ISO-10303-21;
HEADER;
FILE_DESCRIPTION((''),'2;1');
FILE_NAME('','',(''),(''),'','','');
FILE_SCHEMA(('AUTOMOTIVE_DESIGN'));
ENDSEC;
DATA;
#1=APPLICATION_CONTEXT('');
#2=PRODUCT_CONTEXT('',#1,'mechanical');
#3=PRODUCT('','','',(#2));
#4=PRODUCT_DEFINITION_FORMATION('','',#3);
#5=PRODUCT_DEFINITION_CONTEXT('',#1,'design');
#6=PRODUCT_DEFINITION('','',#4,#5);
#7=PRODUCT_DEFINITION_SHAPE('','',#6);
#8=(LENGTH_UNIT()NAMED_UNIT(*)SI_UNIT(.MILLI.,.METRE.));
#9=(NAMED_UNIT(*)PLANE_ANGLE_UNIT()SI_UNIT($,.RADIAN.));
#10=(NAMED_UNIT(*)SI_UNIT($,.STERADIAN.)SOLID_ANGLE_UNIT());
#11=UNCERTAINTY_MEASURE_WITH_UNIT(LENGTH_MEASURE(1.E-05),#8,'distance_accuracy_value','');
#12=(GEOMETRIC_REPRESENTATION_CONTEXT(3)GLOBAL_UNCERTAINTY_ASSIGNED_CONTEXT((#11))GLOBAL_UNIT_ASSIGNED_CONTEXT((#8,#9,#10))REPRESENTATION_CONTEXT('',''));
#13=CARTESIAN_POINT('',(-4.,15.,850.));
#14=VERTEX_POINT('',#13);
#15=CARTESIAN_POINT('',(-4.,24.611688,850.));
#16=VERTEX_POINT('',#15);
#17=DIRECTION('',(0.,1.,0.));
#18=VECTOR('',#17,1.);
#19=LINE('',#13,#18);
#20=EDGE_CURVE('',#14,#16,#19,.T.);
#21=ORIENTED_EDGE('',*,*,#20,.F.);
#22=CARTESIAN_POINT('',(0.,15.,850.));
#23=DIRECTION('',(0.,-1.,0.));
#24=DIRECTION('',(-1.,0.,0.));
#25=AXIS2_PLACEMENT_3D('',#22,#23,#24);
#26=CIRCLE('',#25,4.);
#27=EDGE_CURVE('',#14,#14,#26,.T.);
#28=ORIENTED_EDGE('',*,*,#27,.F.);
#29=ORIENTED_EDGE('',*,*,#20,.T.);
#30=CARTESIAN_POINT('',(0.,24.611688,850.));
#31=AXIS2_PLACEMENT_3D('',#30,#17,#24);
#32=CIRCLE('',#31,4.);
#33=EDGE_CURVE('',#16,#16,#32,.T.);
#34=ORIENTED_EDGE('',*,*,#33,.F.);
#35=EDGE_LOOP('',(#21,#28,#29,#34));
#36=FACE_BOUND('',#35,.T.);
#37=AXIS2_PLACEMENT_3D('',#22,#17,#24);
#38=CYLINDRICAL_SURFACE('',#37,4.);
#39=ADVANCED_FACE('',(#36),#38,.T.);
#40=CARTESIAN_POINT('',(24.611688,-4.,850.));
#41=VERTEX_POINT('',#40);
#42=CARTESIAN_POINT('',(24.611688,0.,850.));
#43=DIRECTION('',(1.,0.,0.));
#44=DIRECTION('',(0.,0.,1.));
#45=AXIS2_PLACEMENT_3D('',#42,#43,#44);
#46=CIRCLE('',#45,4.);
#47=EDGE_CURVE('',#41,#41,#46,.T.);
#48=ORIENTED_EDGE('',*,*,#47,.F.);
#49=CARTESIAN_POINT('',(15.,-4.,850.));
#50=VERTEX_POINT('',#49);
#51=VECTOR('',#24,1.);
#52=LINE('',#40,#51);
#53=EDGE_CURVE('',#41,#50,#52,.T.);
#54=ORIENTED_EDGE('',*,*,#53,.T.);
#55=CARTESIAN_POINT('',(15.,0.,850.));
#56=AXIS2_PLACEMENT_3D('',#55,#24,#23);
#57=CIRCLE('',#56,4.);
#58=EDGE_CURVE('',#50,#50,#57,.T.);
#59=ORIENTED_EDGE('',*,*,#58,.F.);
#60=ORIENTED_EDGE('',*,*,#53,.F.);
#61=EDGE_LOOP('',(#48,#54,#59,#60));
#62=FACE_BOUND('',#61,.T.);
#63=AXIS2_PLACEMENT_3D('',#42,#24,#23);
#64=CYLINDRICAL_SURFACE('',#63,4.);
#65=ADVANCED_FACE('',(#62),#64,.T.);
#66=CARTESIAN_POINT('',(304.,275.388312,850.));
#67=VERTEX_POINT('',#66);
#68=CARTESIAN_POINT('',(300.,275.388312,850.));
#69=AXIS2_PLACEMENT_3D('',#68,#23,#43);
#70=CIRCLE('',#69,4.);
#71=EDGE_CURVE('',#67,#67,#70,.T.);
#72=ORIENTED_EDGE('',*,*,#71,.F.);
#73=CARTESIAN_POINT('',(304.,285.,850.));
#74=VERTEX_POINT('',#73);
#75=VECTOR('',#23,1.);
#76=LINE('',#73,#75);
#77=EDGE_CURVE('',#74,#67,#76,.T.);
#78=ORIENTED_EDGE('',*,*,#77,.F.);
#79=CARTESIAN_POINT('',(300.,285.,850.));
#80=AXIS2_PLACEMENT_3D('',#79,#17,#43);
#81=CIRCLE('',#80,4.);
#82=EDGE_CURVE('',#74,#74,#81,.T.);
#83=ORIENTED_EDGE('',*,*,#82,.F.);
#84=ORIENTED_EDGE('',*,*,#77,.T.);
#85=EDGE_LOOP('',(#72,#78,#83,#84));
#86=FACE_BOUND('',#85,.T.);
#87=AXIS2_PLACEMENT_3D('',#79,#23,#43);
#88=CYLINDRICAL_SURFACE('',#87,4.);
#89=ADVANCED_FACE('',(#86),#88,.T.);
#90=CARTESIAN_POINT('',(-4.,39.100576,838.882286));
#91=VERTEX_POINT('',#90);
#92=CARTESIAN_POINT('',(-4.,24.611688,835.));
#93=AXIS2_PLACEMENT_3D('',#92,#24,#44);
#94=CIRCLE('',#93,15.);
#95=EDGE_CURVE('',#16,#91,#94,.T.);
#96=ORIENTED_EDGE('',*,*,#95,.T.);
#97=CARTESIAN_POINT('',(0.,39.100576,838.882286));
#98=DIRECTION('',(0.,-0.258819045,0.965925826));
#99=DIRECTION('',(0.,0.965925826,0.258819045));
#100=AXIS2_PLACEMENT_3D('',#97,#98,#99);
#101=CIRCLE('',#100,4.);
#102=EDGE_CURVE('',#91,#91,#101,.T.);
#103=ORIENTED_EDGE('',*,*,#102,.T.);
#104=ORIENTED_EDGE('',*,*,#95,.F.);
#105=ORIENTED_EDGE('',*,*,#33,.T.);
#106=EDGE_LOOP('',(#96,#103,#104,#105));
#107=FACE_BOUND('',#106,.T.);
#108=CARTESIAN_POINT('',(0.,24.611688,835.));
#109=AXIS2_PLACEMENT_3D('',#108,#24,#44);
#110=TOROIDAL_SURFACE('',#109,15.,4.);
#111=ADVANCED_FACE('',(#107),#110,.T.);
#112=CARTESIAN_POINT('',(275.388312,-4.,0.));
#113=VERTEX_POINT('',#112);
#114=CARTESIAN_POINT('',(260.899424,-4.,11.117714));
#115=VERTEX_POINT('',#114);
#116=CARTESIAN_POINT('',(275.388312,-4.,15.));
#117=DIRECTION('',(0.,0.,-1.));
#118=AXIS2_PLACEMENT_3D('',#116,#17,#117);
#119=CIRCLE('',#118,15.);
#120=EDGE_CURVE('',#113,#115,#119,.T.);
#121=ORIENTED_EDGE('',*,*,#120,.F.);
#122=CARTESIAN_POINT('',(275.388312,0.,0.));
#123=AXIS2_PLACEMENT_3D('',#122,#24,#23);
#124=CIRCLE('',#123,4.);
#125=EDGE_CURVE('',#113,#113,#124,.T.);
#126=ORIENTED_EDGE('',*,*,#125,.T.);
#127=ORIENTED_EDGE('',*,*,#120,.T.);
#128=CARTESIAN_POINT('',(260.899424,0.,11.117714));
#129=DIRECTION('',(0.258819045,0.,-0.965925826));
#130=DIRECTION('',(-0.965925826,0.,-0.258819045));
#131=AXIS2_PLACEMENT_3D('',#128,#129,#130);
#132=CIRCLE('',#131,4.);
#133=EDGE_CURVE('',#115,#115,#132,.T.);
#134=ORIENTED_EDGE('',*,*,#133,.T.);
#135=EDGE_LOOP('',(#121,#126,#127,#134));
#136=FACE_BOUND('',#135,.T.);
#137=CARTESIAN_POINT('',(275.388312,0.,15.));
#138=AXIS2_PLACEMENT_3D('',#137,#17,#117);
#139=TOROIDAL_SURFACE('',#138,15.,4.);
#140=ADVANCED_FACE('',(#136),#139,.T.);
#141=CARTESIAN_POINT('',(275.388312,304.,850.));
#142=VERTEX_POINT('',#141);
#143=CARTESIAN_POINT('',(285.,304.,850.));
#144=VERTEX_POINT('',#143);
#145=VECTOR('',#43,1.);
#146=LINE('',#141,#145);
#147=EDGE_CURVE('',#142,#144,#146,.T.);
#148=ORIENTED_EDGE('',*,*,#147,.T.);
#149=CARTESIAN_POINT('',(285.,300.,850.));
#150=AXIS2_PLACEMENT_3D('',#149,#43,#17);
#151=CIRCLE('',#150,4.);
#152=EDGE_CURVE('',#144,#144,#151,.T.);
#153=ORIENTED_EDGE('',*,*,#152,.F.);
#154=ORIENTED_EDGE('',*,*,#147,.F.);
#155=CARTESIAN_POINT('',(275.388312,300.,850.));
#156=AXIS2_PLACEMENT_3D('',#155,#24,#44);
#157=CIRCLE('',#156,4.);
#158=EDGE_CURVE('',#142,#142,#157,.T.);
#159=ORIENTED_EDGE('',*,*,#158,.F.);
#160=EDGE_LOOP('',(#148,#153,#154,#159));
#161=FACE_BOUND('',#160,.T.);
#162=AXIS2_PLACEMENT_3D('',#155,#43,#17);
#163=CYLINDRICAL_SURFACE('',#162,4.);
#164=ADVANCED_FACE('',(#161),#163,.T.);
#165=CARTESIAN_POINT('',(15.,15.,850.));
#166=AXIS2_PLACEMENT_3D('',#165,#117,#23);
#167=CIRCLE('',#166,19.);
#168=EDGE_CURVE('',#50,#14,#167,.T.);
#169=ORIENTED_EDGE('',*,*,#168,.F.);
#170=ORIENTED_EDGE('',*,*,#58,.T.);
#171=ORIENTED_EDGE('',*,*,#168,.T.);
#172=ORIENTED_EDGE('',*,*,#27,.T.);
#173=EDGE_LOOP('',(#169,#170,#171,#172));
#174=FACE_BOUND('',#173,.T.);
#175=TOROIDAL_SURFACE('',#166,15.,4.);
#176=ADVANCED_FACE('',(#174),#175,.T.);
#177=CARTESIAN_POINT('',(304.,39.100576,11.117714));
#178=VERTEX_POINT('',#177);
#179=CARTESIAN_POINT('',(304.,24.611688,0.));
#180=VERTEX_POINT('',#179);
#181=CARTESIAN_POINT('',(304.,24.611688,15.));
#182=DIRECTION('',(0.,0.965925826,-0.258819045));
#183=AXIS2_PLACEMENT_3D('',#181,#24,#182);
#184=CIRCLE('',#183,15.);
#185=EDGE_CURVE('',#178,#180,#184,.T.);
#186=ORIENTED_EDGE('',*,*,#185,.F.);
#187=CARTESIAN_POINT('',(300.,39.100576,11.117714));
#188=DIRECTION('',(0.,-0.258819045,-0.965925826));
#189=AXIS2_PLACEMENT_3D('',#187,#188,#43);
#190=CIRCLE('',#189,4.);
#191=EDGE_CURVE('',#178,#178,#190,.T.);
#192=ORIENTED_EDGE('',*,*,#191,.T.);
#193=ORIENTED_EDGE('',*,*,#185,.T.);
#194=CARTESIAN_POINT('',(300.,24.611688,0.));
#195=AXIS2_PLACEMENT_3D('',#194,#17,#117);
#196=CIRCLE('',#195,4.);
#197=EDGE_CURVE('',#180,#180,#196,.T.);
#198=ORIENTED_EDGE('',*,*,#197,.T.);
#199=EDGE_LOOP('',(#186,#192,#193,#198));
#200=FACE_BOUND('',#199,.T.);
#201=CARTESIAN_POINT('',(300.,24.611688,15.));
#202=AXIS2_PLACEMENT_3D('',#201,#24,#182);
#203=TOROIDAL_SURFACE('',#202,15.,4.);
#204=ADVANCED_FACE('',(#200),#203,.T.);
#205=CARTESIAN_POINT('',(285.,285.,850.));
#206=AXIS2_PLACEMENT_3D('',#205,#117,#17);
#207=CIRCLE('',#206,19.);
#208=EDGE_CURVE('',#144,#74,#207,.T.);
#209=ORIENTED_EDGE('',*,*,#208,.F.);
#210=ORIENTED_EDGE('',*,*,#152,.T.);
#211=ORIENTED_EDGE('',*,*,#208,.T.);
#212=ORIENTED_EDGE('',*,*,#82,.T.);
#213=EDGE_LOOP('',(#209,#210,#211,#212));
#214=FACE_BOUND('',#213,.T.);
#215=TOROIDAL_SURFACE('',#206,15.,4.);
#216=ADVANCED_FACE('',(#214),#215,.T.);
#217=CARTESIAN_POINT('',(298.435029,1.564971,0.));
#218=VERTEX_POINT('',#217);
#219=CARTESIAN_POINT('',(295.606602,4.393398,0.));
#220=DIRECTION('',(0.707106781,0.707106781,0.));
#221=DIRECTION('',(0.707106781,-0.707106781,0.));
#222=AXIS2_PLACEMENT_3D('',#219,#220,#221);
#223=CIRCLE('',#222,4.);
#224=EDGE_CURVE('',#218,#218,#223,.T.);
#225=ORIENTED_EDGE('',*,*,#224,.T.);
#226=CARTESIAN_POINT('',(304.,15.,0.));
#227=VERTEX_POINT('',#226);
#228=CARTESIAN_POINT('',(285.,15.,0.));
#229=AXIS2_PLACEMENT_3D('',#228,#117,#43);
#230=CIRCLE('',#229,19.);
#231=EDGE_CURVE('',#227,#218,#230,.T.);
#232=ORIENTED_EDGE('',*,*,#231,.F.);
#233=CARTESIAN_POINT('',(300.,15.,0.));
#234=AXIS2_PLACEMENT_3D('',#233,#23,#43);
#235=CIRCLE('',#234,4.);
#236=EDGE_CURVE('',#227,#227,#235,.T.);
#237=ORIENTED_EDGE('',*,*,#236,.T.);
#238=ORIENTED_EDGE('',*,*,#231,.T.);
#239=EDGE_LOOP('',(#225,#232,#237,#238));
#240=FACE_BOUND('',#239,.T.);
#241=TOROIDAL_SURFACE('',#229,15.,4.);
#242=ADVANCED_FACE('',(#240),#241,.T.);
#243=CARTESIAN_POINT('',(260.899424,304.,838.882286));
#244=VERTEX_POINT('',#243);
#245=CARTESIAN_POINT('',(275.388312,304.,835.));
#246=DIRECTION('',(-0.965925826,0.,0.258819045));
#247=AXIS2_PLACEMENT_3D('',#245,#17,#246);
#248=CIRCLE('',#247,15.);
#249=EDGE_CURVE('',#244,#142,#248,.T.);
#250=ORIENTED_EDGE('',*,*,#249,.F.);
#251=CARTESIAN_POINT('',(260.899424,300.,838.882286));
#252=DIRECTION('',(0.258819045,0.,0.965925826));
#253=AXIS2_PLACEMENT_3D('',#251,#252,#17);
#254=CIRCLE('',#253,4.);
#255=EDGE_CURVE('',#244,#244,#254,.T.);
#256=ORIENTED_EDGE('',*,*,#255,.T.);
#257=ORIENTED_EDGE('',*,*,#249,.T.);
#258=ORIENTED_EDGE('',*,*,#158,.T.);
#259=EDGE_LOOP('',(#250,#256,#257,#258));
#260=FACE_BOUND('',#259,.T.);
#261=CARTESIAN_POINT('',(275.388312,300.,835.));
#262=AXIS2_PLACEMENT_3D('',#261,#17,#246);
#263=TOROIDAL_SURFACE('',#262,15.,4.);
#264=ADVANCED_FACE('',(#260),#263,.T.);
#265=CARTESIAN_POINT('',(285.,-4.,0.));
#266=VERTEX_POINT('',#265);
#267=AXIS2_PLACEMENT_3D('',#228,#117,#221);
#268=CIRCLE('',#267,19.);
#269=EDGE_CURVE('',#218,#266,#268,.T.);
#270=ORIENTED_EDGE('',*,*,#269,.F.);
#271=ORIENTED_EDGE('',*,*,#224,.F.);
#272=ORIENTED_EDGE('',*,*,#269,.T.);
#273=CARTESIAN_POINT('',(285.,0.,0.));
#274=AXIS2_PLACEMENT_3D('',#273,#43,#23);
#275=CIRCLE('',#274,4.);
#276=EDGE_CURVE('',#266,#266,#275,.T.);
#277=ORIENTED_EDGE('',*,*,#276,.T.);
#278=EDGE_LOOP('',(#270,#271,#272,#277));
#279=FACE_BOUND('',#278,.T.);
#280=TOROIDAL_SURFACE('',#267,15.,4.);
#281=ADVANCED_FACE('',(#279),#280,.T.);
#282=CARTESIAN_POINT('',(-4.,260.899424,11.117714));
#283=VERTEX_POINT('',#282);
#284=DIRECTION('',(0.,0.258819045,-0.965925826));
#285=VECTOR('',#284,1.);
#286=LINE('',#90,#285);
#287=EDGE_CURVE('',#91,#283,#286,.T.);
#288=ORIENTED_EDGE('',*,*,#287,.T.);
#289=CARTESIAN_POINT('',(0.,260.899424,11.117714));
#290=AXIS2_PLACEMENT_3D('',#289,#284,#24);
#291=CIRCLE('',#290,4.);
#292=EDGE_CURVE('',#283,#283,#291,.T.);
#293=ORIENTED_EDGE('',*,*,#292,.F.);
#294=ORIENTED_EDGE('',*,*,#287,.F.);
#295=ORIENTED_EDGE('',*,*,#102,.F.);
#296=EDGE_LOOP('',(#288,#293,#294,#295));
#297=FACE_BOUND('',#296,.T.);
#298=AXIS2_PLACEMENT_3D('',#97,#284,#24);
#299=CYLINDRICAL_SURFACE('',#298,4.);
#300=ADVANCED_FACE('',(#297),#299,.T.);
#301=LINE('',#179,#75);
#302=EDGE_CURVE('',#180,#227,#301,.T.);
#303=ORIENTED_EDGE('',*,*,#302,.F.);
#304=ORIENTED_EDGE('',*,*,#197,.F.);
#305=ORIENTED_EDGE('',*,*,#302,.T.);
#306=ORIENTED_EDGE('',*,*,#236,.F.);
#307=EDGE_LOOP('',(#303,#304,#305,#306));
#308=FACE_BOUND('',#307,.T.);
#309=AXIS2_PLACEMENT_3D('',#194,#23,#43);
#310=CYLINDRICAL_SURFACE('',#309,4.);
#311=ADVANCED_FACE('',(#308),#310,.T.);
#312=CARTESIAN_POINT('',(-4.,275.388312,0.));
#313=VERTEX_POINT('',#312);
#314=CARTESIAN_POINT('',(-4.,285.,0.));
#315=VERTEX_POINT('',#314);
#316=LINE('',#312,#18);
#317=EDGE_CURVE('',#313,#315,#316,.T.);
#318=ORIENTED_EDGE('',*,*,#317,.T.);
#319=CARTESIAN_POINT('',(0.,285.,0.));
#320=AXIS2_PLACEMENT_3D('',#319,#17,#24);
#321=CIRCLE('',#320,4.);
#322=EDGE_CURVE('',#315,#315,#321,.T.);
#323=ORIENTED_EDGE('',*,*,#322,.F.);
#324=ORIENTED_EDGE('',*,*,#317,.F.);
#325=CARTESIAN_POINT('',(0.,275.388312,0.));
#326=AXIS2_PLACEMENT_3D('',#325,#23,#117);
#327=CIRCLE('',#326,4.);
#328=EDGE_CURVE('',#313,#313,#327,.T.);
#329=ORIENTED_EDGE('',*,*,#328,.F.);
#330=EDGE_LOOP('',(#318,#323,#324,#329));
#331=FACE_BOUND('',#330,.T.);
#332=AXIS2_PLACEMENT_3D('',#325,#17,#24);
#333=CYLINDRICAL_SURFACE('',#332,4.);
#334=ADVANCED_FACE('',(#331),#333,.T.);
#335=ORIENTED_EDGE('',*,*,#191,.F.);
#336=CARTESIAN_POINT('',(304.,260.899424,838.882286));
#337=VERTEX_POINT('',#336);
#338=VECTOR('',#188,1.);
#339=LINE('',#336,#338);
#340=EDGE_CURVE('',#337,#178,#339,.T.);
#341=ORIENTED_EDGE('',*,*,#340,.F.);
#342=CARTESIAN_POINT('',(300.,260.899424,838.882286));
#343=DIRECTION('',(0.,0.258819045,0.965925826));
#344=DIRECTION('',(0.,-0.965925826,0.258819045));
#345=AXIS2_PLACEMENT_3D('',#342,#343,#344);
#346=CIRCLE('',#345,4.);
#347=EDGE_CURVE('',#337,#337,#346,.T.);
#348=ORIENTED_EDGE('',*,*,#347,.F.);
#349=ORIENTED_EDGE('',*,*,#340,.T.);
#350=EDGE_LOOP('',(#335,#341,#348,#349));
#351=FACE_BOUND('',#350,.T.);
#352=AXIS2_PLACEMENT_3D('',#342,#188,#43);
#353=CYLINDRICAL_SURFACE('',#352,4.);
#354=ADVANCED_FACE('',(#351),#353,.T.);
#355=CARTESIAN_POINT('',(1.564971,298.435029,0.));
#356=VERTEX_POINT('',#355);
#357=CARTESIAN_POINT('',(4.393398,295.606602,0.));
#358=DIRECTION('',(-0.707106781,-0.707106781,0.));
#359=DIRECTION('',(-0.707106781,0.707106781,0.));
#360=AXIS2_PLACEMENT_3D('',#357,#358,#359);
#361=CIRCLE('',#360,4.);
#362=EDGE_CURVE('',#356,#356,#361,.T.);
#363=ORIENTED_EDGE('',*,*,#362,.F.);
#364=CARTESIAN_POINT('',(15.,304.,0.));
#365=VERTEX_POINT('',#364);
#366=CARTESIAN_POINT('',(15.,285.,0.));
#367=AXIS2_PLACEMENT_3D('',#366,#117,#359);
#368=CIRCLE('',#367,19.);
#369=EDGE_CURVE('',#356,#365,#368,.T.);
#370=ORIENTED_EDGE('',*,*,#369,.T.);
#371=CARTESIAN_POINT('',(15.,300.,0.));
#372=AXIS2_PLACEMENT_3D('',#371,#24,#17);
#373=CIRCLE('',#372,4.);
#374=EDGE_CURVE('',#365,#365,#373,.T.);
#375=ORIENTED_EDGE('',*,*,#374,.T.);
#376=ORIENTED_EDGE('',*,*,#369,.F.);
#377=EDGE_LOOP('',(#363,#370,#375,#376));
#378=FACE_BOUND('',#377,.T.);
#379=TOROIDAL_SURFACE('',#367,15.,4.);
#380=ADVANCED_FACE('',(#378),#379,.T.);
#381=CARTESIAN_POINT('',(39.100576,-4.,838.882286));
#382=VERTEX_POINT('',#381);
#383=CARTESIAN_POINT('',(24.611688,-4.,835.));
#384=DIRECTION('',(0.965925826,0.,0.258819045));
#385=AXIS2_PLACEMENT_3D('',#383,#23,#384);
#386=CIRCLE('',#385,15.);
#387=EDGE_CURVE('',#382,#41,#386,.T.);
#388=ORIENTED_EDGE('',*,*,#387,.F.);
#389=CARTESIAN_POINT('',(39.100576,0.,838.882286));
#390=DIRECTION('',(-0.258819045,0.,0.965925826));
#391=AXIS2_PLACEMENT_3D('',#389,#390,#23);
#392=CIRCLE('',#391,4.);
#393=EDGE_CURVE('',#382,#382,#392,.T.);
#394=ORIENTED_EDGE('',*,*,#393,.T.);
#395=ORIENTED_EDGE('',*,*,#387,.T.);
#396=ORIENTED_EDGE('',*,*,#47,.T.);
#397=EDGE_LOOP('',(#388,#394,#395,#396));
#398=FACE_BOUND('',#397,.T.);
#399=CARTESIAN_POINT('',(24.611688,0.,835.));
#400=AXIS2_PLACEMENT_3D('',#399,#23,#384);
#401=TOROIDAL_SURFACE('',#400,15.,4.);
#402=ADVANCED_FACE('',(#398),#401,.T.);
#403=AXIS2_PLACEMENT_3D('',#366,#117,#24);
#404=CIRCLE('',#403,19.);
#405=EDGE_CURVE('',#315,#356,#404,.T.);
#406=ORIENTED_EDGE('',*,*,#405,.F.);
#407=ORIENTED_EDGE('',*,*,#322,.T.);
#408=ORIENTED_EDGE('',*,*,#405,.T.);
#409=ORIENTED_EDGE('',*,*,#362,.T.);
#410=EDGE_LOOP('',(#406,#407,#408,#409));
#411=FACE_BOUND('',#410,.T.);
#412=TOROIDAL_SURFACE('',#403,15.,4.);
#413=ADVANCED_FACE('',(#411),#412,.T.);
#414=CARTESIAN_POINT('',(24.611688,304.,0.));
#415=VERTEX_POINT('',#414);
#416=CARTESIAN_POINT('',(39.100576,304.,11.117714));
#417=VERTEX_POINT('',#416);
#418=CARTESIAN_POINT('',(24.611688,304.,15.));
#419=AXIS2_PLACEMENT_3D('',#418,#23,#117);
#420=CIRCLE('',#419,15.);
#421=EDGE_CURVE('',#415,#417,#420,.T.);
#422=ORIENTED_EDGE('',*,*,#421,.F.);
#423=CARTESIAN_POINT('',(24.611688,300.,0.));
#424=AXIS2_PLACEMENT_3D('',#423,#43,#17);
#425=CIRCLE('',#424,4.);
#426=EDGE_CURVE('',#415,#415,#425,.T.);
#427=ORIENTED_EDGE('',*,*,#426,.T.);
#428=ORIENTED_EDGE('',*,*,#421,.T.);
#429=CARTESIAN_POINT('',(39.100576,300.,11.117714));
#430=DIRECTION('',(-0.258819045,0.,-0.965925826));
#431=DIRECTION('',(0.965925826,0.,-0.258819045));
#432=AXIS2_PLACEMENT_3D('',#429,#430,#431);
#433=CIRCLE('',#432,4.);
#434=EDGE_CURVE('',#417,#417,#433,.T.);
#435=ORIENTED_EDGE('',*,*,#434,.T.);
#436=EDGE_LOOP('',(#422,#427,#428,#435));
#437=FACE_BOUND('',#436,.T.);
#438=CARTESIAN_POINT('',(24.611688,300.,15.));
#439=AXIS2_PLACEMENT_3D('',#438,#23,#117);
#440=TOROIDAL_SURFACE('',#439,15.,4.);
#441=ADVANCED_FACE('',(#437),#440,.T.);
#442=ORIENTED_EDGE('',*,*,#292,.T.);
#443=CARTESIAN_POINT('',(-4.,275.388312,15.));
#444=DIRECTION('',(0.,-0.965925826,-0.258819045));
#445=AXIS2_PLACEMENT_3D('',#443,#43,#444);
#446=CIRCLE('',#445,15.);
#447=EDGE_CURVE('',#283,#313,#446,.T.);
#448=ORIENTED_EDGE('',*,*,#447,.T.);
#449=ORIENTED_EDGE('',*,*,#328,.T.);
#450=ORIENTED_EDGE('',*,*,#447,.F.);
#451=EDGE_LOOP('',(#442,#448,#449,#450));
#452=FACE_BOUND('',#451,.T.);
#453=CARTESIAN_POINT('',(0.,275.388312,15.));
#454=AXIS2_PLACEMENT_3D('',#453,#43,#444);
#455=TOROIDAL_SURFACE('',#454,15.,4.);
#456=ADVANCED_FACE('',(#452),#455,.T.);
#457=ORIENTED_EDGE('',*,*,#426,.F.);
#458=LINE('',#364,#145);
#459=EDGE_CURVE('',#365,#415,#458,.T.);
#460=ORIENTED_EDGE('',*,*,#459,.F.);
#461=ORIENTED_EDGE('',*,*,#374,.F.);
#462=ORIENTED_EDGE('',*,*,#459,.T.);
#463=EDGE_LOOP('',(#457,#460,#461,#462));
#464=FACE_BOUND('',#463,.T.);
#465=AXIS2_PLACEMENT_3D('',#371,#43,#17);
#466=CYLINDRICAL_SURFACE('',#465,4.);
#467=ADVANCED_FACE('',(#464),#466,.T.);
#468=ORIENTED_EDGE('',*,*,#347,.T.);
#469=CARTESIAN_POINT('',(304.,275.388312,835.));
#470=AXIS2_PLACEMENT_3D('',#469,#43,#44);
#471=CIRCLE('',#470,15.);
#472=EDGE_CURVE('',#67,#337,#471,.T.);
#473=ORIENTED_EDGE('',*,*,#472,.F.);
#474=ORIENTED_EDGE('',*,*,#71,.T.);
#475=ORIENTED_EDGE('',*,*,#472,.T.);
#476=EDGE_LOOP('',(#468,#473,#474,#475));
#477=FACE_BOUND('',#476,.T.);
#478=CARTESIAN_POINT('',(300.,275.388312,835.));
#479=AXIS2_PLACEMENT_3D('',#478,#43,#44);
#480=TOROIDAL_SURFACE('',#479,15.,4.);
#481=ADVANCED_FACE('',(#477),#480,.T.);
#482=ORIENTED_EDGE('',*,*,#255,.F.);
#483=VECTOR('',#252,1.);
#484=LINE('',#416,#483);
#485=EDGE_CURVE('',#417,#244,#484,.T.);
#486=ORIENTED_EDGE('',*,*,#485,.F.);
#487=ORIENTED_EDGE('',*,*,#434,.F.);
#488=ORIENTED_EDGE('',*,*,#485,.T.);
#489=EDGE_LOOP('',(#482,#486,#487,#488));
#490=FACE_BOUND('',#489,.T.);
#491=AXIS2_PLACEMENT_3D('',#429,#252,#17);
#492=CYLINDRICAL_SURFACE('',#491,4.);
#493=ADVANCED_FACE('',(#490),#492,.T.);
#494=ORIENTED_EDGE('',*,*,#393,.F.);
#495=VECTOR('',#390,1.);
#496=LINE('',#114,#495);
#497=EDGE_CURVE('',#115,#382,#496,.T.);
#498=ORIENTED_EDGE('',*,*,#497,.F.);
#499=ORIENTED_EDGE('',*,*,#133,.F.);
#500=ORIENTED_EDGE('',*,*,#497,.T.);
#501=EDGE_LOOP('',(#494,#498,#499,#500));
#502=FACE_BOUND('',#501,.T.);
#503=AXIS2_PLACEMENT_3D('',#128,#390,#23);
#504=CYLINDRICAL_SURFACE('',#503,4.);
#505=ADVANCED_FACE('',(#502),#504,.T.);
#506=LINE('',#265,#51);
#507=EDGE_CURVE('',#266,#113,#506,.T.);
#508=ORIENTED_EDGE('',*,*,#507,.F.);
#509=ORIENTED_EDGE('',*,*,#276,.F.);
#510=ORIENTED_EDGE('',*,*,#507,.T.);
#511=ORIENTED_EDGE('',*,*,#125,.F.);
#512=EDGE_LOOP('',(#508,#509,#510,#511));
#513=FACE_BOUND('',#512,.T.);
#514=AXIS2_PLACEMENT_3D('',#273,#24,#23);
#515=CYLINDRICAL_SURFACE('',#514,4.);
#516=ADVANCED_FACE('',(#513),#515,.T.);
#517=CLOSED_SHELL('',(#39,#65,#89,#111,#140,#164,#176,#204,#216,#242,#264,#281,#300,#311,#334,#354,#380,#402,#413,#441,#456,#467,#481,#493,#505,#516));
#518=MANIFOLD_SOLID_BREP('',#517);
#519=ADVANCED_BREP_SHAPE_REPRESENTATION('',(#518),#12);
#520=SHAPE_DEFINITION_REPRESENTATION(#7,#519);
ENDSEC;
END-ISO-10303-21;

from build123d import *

# Parameters (mm, degrees)
F7_R            = 4
F8_COPIES_COUNT = 2


# Not quite as in the source:
# - a feature of the source that left no trace in its solid (it failed there, or was rolled back) is left out
# - a pattern or mirror of a feature is missing from the dataset's text; its kind, count and spacing are read off the source's solid


with BuildPart() as f8:
    # F8: sweep along a path in F6, F3, F5, F2, F6
    with BuildLine(Plane.XY) as f8_path:
        ThreePointArc((295.6066017178, 4.3933982822), (290.7402514855, 1.1418070123), (285, 0))
        Line((285, 0), (275.3883116029, 0))
    with BuildLine(Plane.XZ) as f8_path_2:
        ThreePointArc((275.3883116029, 0), (266.2568901678, 3.0996998956), (260.8994242086, 11.1177143235))
        Line((260.8994242086, 11.1177143235), (39.1005757914, 838.8822856765))
        ThreePointArc((39.1005757914, 838.8822856765), (33.7431098322, 846.9003001044), (24.6116883971, 850))
    with BuildLine(Plane.XY.offset(850)) as f8_path_3:
        Line((24.6116883971, 0), (15, 0))
        ThreePointArc((15, 0), (4.3933982822, 4.3933982822), (0, 15))
        Line((0, 15), (0, 24.6116883971))
    with BuildLine(Plane.YZ) as f8_path_4:
        ThreePointArc((24.6116883971, 850), (33.7431098322, 846.9003001044), (39.1005757914, 838.8822856765))
        Line((39.1005757914, 838.8822856765), (260.8994242086, 11.1177143235))
        ThreePointArc((260.8994242086, 11.1177143235), (266.2568901678, 3.0996998956), (275.3883116029, 0))
    with BuildLine(Plane.XY) as f8_path_5:
        Line((0, 275.3883116029), (0, 285))
        ThreePointArc((0, 285), (1.1418070123, 290.7402514855), (4.3933982822, 295.6066017178))
    # F7 (on face) → F8 (sweep)
    with BuildSketch(Plane(origin=(150, 150, 0), x_dir=(0.7071067812, -0.7071067812, 0), z_dir=(-0.7071067812, -0.7071067812, 0))):
        with Locations((205.9188309204, 0)):
            Circle(F7_R)
    sweep(path=f8_path.line + f8_path_2.line + f8_path_3.line + f8_path_4.line + f8_path_5.line)

    # F8_copies: F8 ×2 about axis
    f8_copies_axis = Axis((150, 150, 0), (0, 0, 1))


with BuildPart() as f8_1:
    add(f8.part)
    for i in range(1, F8_COPIES_COUNT):
        add(f8.part.rotate(f8_copies_axis, i * 360 / F8_COPIES_COUNT))


solid = f8_1.part
